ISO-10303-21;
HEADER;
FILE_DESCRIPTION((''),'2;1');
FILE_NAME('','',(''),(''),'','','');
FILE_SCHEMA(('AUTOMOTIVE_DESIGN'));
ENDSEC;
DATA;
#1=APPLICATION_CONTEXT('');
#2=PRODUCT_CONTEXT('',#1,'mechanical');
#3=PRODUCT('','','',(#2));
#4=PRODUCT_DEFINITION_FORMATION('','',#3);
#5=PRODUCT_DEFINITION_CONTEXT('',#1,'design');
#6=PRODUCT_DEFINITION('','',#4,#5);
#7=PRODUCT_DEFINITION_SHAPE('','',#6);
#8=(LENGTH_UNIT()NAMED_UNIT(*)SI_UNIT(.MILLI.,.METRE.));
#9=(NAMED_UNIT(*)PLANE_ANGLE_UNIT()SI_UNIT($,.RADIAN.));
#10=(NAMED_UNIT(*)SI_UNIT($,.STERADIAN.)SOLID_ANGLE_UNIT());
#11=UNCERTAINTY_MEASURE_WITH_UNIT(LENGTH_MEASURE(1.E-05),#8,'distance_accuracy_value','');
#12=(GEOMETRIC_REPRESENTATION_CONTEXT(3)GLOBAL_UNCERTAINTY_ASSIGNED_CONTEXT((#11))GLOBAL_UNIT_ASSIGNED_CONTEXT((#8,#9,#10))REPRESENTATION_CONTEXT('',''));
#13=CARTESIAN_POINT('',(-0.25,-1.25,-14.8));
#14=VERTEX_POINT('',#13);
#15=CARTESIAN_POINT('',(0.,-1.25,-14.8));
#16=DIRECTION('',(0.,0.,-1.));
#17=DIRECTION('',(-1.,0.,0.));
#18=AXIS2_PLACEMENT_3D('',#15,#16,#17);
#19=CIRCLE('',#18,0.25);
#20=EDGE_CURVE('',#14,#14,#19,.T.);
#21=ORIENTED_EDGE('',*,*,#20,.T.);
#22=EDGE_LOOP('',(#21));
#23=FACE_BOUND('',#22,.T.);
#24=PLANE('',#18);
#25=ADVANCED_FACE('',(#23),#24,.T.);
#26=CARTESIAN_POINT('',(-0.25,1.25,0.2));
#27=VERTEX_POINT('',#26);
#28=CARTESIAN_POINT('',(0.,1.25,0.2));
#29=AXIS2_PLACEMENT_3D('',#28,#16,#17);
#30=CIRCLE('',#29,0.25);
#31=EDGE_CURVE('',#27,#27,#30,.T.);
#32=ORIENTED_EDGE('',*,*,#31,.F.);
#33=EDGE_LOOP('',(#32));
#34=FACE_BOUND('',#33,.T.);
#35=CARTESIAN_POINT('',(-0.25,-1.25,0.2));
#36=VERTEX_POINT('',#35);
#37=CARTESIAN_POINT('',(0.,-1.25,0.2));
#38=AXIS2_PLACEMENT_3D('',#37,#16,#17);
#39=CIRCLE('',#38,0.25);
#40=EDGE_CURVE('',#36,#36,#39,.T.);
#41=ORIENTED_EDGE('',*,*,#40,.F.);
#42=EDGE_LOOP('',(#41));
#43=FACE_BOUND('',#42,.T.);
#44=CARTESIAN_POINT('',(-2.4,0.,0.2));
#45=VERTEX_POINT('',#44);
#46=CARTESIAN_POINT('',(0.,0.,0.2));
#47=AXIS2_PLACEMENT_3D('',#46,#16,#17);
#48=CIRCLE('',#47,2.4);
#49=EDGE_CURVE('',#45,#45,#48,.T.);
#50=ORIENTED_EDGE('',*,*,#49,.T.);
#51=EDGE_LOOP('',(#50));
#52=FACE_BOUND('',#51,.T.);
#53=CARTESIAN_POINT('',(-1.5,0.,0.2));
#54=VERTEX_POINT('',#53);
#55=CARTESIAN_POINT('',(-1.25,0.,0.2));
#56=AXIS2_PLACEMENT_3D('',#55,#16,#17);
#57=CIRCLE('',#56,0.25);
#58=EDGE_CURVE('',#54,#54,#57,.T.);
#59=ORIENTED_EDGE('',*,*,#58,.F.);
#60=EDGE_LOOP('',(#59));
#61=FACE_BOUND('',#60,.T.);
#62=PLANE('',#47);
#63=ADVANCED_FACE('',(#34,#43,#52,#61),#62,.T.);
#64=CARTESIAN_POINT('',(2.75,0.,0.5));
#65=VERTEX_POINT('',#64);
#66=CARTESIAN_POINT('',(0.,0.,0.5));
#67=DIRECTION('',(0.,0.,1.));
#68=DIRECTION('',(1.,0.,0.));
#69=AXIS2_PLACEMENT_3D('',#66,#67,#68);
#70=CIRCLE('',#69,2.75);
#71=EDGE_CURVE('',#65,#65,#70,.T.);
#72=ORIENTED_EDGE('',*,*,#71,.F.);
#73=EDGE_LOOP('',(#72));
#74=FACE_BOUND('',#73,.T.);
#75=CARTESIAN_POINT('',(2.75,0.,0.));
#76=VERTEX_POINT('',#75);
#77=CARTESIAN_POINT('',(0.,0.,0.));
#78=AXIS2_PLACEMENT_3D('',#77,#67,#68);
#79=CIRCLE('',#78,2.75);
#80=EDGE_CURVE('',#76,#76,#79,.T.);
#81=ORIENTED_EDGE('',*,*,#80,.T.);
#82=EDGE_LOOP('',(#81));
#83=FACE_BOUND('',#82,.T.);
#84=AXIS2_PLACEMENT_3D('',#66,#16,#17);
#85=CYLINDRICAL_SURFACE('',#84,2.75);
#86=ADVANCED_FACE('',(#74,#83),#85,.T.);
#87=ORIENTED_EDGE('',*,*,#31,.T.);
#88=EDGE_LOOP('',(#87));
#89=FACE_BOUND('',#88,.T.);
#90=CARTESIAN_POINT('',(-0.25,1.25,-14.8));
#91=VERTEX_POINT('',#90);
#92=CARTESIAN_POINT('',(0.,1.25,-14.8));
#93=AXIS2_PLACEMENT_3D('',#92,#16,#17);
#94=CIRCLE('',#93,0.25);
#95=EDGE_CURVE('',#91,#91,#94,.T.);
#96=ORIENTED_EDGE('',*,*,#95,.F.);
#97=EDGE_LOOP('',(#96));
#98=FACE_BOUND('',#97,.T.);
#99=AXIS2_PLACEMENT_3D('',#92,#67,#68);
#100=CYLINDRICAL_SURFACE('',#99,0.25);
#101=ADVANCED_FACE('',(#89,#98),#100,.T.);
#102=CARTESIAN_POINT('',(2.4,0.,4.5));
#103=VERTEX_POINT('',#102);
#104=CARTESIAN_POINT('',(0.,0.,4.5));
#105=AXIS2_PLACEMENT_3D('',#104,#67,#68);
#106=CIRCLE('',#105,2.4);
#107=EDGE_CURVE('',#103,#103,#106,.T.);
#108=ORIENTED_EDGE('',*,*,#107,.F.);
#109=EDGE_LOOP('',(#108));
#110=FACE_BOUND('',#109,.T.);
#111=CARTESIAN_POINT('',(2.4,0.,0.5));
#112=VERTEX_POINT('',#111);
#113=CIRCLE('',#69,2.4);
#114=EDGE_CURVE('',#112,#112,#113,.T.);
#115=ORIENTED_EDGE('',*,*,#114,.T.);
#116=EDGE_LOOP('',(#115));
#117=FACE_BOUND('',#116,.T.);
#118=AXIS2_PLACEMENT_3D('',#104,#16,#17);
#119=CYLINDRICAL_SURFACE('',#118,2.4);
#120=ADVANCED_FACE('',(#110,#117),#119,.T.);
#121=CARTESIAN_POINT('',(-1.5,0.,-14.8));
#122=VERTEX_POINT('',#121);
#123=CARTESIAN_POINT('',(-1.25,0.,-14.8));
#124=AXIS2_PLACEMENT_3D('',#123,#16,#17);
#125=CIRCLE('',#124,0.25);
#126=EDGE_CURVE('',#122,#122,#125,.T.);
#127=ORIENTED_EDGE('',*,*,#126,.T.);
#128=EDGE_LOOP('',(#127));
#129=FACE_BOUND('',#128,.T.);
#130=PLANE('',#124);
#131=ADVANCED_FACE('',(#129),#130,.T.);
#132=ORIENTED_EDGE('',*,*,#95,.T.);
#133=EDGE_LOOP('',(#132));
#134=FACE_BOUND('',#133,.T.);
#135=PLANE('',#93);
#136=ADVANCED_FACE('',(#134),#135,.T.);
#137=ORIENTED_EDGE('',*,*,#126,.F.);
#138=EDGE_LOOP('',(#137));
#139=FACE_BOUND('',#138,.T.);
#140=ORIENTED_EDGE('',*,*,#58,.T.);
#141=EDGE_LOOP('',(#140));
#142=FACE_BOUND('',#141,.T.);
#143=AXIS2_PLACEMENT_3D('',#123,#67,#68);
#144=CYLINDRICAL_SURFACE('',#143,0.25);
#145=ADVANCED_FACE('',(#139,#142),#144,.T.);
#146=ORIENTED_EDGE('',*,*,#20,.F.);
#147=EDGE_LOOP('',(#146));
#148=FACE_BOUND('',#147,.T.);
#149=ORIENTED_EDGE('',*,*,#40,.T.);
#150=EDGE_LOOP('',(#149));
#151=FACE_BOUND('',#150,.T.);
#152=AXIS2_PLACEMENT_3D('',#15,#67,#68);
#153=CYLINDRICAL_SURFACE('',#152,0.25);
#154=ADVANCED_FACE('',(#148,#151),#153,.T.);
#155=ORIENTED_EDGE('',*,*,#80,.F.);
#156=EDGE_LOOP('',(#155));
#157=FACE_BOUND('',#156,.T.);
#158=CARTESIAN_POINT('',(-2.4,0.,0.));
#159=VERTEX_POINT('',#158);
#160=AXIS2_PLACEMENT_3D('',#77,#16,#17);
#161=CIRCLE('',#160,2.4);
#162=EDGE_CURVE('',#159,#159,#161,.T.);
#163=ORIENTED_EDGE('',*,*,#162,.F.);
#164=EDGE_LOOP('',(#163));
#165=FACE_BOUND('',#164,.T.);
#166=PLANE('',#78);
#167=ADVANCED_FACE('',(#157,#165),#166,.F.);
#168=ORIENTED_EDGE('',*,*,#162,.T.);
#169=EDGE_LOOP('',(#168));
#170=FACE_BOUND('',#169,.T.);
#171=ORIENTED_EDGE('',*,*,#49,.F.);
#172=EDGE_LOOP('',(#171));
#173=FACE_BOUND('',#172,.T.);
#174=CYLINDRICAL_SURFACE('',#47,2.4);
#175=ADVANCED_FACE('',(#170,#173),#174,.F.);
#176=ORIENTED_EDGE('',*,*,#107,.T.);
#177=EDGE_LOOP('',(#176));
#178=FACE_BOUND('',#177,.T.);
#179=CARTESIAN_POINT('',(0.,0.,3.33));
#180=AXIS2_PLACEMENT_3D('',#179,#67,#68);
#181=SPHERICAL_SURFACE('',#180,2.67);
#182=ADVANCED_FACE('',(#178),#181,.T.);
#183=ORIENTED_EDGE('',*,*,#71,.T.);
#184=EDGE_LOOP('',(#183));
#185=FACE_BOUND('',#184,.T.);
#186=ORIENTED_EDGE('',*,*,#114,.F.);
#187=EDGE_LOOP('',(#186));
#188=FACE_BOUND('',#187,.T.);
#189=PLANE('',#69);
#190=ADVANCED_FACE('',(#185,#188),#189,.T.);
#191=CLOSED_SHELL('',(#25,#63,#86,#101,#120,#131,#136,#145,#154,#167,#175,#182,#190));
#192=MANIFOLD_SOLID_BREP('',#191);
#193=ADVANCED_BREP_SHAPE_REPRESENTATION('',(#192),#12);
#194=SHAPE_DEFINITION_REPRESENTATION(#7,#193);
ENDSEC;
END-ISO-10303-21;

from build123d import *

# Parameters (mm, degrees)
SKETCH2_R           = 2.75
BOSS_EXTRUDE2_DEPTH = 0.5
SKETCH4_R           = 2.4
BOSS_EXTRUDE3_DEPTH = 4
SKETCH5_R           = 2.4
CUT_EXTRUDE1_DEPTH  = 0.2
SKETCH6_R           = 0.25
BOSS_EXTRUDE4_DEPTH = 15


# Read off the part's stored shape, not the designer's step: Dome1
with BuildPart() as part:
    # Sketch2 → Boss-Extrude2 (new body)
    with BuildSketch(Plane.XY):
        Circle(SKETCH2_R)
    extrude(amount=BOSS_EXTRUDE2_DEPTH)

    # Sketch4 → Boss-Extrude3 (add)
    with BuildSketch(Plane.XY.offset(0.5)):
        Circle(SKETCH4_R)
    extrude(amount=BOSS_EXTRUDE3_DEPTH)

    # Dome1 outline → Dome1 (revolve)
    with BuildSketch(Plane.XZ):
        with BuildLine():
            Line((0, 4.5), (2.400000001, 4.499999998))
            ThreePointArc((2.400000001, 4.499999998), (1.415097171, 5.594155471), (0, 6))
            Line((0, 6), (0, 4.5))
        make_face()
    revolve(axis=Axis((0, 0, 0), (0, 0, 1)))

    # Sketch5 → Cut-Extrude1 (cut)
    with BuildSketch(Plane(origin=(0, 0, 0), x_dir=(-1, 0, 0), z_dir=(0, 0, -1))):
        with Locations(Location((0, 0, 0), (0, 0, 180))):
            Circle(SKETCH5_R)
    extrude(amount=-CUT_EXTRUDE1_DEPTH, mode=Mode.SUBTRACT)

    # Sketch6 → Boss-Extrude4 (add)
    with BuildSketch(Plane(origin=(0, 0, 0.2), x_dir=(-1, 0, 0), z_dir=(0, 0, -1))):
        with Locations((0, 1.25)):
            Circle(SKETCH6_R)
        with Locations((1.25, 0)):
            Circle(SKETCH6_R)
        with Locations((0, -1.25)):
            Circle(SKETCH6_R)
    extrude(amount=BOSS_EXTRUDE4_DEPTH)


solid = part.part
